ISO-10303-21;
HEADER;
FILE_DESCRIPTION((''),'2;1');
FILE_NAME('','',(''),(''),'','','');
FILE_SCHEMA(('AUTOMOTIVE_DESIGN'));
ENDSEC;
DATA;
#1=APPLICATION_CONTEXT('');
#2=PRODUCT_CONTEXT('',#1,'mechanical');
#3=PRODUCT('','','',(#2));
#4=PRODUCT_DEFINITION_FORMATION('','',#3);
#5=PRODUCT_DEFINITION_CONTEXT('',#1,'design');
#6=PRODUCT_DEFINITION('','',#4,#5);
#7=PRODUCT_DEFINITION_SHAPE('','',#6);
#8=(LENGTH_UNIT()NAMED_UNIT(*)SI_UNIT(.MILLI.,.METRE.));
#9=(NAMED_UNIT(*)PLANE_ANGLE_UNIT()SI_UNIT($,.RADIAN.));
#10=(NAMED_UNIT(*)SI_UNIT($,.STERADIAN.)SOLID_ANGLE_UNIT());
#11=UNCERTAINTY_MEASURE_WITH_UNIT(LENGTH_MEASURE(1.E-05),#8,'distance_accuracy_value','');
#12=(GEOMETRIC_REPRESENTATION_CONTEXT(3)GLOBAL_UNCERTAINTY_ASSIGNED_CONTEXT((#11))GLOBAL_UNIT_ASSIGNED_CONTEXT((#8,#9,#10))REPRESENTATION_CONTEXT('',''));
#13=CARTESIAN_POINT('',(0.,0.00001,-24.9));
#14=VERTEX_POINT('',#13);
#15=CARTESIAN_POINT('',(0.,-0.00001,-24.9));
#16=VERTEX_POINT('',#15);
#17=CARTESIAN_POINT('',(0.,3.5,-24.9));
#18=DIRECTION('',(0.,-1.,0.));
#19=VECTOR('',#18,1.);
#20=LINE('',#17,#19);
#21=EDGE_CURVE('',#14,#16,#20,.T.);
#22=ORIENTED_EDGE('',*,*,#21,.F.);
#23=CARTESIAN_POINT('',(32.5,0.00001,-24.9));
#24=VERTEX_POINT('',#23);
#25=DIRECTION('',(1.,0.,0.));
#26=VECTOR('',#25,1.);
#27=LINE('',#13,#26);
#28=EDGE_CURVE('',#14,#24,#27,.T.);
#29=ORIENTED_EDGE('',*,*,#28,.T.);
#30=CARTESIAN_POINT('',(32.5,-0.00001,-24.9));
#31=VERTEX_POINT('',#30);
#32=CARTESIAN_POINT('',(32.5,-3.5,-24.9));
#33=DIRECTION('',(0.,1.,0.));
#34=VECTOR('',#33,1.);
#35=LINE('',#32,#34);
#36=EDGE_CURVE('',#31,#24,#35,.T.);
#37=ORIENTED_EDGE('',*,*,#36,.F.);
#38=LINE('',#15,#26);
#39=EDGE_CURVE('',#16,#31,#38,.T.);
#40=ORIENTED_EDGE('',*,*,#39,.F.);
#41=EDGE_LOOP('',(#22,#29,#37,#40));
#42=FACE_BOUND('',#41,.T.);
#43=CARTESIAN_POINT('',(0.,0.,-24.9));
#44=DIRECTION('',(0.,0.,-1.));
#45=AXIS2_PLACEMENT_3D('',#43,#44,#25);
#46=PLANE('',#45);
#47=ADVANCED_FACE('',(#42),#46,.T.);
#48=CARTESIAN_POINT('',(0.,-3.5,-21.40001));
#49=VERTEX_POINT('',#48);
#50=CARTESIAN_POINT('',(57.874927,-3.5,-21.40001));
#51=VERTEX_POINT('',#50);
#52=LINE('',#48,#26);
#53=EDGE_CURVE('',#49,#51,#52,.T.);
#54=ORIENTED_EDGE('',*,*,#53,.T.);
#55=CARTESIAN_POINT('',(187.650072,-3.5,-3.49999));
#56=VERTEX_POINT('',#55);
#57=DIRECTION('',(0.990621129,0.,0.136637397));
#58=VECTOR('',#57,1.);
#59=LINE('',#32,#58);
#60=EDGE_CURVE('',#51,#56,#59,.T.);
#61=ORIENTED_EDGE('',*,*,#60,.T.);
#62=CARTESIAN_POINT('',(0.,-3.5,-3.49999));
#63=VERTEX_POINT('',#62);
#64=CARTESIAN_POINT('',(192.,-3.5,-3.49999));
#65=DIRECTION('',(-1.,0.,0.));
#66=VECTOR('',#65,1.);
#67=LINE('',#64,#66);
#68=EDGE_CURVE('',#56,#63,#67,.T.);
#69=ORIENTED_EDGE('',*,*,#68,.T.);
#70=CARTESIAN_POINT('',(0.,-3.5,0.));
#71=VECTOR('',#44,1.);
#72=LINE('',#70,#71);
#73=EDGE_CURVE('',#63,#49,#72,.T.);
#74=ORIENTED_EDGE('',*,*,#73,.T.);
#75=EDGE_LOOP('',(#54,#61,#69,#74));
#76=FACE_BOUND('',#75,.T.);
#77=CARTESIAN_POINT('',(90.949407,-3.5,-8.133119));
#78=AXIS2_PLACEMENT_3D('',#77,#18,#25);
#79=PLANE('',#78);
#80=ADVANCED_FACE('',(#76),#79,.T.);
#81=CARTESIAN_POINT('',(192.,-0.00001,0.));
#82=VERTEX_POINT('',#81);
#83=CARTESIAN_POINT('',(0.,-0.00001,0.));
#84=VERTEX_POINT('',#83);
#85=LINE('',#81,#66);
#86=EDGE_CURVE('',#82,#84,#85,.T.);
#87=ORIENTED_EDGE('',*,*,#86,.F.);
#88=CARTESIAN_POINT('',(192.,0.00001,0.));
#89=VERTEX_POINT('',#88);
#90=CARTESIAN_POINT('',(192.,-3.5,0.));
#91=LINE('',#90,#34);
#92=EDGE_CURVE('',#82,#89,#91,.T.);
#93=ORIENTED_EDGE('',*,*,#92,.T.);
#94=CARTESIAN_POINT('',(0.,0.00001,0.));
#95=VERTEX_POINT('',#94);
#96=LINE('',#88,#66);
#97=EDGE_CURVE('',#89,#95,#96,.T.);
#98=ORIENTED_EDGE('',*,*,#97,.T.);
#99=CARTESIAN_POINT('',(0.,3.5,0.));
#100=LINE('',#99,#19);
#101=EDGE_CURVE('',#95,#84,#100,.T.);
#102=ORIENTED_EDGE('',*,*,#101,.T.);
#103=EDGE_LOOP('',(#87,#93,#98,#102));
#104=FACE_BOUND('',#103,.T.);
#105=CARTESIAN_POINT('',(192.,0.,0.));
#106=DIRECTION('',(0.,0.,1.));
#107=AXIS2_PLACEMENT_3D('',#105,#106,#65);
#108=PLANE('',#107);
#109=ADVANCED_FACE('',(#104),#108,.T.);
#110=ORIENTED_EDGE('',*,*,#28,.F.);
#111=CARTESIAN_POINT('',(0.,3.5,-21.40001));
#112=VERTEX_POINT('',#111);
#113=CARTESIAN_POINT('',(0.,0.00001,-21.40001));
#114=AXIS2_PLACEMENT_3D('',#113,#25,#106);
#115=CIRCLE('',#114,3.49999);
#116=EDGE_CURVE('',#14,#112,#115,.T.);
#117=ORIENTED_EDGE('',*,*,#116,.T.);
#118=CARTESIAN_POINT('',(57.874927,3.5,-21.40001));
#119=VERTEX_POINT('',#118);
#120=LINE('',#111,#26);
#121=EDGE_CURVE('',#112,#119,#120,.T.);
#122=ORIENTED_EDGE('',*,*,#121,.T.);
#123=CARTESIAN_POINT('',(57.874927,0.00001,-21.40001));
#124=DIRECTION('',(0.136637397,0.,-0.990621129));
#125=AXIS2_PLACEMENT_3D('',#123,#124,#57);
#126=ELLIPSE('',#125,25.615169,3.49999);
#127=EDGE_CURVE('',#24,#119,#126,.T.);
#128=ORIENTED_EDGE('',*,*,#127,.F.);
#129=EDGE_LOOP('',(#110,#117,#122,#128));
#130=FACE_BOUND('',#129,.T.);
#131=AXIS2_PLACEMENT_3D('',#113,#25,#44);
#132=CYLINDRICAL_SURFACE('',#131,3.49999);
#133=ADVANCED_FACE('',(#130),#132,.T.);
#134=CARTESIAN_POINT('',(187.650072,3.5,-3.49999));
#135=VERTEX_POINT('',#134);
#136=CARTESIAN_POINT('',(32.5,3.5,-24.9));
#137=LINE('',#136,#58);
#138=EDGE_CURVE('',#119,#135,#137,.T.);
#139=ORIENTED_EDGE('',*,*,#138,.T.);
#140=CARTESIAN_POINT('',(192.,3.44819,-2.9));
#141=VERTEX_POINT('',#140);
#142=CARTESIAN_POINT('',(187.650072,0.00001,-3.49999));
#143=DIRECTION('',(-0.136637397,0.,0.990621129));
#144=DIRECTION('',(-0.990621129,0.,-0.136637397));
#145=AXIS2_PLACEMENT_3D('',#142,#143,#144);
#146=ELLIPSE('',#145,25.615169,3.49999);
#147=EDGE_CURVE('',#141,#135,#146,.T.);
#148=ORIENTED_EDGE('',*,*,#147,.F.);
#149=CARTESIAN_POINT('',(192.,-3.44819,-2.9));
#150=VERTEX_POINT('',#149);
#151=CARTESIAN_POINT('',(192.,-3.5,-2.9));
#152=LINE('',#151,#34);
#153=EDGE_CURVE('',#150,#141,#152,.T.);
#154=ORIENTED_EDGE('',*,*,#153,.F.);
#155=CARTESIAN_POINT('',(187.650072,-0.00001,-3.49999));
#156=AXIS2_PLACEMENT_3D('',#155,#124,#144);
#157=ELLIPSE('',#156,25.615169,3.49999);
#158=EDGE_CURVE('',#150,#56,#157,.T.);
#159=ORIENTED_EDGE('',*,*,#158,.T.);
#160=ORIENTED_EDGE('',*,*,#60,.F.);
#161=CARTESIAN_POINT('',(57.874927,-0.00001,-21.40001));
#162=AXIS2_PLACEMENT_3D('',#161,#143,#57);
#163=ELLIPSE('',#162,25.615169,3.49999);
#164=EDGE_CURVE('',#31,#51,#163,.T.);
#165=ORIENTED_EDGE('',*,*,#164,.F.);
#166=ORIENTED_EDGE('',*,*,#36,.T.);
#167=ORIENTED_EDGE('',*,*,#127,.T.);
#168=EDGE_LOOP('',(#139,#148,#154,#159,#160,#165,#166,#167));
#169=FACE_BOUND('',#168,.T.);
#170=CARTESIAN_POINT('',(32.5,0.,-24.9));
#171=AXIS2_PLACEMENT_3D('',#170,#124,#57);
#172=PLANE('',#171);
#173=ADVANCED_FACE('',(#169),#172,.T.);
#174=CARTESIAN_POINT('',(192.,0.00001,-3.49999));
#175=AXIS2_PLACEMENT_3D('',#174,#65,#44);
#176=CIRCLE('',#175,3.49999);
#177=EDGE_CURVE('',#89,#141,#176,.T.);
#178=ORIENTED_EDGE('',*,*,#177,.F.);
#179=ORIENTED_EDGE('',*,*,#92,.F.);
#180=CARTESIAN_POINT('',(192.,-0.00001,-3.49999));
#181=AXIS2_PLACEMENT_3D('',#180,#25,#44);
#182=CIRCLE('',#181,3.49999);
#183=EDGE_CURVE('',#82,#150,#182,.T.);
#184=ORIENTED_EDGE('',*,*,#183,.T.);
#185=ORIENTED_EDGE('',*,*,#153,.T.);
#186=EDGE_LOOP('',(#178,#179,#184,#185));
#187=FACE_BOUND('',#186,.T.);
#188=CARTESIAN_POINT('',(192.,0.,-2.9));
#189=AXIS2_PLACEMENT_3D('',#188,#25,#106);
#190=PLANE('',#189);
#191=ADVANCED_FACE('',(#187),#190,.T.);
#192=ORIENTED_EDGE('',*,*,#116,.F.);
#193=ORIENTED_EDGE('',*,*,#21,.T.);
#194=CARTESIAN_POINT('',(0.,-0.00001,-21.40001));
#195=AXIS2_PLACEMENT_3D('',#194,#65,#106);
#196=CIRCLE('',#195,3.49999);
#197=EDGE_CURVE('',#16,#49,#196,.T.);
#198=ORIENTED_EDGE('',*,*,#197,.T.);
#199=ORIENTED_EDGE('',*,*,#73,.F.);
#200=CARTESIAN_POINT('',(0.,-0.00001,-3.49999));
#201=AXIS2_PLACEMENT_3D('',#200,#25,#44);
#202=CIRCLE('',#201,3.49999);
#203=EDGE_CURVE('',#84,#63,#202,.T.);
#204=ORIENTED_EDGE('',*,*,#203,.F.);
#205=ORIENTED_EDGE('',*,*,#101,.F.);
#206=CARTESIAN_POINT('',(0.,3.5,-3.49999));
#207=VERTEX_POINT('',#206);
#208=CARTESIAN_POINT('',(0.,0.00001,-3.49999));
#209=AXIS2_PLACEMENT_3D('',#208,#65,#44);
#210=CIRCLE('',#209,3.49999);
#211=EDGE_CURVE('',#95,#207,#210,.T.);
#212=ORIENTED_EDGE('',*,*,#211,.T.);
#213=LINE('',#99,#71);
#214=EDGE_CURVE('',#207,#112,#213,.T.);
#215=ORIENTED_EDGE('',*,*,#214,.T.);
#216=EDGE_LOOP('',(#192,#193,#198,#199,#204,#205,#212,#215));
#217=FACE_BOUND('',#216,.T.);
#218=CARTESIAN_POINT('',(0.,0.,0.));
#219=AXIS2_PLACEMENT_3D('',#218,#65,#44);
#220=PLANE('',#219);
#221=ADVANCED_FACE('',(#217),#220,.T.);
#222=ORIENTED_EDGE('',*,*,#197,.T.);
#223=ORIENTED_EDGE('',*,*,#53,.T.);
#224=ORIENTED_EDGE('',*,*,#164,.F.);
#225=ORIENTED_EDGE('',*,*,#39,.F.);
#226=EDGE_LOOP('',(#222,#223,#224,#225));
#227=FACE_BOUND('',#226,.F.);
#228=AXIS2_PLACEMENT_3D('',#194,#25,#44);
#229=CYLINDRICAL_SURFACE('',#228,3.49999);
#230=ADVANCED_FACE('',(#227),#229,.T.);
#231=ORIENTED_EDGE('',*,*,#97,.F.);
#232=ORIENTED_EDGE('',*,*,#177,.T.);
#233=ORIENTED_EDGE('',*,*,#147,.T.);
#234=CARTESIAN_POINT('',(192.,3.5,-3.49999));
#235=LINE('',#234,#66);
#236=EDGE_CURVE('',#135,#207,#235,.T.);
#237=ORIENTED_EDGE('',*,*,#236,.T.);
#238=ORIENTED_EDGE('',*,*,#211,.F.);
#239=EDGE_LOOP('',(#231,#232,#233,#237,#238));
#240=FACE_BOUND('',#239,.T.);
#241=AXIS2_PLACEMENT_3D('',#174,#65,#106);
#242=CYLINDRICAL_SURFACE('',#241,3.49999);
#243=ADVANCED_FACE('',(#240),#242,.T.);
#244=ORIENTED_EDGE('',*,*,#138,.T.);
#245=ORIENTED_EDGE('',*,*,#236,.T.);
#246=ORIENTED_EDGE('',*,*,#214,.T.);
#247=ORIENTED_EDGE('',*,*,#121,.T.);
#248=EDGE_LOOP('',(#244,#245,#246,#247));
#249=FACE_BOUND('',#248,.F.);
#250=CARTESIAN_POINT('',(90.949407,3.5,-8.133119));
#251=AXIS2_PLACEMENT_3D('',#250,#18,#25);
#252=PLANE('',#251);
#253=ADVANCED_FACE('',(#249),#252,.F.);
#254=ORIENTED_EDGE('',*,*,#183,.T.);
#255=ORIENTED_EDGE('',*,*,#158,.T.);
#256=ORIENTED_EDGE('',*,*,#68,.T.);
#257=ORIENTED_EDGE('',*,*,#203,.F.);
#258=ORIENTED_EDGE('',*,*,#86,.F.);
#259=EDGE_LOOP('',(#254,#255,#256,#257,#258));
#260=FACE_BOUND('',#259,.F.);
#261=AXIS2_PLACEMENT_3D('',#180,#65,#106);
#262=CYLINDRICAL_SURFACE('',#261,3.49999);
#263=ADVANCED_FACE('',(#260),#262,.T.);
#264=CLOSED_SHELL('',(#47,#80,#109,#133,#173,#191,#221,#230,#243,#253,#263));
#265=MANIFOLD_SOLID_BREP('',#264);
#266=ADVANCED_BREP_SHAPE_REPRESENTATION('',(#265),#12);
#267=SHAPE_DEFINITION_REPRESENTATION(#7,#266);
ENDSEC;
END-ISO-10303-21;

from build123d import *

# Parameters (mm, degrees)
F1_DEPTH = 3.5
F2_R     = 3.49999


# Not quite as in the source:
# - a fillet or chamfer is up to 0.001 mm smaller than in the source, because OpenCascade refuses the exact size


with BuildPart() as f1:
    # F0 (on Front) → F1 (new body, symmetric)
    with BuildSketch(Plane.XZ):
        Polygon((192, 0), (0, 0), (0, -24.9), (32.5, -24.9), (192, -2.9), align=None)
    extrude(amount=F1_DEPTH, both=True)

    # F2 (radius 3.5 in the source; OpenCascade refuses exactly that, so slightly less here)
    f2_edges = [f1.edges().sort_by_distance(p)[0] for p in [
        (96, -3.5, 0),
        (96, 3.5, 0),
        (16.25, -3.5, -24.9),
        (16.25, 3.5, -24.9),
    ]]
    fillet(f2_edges, radius=F2_R)


solid = f1.part
